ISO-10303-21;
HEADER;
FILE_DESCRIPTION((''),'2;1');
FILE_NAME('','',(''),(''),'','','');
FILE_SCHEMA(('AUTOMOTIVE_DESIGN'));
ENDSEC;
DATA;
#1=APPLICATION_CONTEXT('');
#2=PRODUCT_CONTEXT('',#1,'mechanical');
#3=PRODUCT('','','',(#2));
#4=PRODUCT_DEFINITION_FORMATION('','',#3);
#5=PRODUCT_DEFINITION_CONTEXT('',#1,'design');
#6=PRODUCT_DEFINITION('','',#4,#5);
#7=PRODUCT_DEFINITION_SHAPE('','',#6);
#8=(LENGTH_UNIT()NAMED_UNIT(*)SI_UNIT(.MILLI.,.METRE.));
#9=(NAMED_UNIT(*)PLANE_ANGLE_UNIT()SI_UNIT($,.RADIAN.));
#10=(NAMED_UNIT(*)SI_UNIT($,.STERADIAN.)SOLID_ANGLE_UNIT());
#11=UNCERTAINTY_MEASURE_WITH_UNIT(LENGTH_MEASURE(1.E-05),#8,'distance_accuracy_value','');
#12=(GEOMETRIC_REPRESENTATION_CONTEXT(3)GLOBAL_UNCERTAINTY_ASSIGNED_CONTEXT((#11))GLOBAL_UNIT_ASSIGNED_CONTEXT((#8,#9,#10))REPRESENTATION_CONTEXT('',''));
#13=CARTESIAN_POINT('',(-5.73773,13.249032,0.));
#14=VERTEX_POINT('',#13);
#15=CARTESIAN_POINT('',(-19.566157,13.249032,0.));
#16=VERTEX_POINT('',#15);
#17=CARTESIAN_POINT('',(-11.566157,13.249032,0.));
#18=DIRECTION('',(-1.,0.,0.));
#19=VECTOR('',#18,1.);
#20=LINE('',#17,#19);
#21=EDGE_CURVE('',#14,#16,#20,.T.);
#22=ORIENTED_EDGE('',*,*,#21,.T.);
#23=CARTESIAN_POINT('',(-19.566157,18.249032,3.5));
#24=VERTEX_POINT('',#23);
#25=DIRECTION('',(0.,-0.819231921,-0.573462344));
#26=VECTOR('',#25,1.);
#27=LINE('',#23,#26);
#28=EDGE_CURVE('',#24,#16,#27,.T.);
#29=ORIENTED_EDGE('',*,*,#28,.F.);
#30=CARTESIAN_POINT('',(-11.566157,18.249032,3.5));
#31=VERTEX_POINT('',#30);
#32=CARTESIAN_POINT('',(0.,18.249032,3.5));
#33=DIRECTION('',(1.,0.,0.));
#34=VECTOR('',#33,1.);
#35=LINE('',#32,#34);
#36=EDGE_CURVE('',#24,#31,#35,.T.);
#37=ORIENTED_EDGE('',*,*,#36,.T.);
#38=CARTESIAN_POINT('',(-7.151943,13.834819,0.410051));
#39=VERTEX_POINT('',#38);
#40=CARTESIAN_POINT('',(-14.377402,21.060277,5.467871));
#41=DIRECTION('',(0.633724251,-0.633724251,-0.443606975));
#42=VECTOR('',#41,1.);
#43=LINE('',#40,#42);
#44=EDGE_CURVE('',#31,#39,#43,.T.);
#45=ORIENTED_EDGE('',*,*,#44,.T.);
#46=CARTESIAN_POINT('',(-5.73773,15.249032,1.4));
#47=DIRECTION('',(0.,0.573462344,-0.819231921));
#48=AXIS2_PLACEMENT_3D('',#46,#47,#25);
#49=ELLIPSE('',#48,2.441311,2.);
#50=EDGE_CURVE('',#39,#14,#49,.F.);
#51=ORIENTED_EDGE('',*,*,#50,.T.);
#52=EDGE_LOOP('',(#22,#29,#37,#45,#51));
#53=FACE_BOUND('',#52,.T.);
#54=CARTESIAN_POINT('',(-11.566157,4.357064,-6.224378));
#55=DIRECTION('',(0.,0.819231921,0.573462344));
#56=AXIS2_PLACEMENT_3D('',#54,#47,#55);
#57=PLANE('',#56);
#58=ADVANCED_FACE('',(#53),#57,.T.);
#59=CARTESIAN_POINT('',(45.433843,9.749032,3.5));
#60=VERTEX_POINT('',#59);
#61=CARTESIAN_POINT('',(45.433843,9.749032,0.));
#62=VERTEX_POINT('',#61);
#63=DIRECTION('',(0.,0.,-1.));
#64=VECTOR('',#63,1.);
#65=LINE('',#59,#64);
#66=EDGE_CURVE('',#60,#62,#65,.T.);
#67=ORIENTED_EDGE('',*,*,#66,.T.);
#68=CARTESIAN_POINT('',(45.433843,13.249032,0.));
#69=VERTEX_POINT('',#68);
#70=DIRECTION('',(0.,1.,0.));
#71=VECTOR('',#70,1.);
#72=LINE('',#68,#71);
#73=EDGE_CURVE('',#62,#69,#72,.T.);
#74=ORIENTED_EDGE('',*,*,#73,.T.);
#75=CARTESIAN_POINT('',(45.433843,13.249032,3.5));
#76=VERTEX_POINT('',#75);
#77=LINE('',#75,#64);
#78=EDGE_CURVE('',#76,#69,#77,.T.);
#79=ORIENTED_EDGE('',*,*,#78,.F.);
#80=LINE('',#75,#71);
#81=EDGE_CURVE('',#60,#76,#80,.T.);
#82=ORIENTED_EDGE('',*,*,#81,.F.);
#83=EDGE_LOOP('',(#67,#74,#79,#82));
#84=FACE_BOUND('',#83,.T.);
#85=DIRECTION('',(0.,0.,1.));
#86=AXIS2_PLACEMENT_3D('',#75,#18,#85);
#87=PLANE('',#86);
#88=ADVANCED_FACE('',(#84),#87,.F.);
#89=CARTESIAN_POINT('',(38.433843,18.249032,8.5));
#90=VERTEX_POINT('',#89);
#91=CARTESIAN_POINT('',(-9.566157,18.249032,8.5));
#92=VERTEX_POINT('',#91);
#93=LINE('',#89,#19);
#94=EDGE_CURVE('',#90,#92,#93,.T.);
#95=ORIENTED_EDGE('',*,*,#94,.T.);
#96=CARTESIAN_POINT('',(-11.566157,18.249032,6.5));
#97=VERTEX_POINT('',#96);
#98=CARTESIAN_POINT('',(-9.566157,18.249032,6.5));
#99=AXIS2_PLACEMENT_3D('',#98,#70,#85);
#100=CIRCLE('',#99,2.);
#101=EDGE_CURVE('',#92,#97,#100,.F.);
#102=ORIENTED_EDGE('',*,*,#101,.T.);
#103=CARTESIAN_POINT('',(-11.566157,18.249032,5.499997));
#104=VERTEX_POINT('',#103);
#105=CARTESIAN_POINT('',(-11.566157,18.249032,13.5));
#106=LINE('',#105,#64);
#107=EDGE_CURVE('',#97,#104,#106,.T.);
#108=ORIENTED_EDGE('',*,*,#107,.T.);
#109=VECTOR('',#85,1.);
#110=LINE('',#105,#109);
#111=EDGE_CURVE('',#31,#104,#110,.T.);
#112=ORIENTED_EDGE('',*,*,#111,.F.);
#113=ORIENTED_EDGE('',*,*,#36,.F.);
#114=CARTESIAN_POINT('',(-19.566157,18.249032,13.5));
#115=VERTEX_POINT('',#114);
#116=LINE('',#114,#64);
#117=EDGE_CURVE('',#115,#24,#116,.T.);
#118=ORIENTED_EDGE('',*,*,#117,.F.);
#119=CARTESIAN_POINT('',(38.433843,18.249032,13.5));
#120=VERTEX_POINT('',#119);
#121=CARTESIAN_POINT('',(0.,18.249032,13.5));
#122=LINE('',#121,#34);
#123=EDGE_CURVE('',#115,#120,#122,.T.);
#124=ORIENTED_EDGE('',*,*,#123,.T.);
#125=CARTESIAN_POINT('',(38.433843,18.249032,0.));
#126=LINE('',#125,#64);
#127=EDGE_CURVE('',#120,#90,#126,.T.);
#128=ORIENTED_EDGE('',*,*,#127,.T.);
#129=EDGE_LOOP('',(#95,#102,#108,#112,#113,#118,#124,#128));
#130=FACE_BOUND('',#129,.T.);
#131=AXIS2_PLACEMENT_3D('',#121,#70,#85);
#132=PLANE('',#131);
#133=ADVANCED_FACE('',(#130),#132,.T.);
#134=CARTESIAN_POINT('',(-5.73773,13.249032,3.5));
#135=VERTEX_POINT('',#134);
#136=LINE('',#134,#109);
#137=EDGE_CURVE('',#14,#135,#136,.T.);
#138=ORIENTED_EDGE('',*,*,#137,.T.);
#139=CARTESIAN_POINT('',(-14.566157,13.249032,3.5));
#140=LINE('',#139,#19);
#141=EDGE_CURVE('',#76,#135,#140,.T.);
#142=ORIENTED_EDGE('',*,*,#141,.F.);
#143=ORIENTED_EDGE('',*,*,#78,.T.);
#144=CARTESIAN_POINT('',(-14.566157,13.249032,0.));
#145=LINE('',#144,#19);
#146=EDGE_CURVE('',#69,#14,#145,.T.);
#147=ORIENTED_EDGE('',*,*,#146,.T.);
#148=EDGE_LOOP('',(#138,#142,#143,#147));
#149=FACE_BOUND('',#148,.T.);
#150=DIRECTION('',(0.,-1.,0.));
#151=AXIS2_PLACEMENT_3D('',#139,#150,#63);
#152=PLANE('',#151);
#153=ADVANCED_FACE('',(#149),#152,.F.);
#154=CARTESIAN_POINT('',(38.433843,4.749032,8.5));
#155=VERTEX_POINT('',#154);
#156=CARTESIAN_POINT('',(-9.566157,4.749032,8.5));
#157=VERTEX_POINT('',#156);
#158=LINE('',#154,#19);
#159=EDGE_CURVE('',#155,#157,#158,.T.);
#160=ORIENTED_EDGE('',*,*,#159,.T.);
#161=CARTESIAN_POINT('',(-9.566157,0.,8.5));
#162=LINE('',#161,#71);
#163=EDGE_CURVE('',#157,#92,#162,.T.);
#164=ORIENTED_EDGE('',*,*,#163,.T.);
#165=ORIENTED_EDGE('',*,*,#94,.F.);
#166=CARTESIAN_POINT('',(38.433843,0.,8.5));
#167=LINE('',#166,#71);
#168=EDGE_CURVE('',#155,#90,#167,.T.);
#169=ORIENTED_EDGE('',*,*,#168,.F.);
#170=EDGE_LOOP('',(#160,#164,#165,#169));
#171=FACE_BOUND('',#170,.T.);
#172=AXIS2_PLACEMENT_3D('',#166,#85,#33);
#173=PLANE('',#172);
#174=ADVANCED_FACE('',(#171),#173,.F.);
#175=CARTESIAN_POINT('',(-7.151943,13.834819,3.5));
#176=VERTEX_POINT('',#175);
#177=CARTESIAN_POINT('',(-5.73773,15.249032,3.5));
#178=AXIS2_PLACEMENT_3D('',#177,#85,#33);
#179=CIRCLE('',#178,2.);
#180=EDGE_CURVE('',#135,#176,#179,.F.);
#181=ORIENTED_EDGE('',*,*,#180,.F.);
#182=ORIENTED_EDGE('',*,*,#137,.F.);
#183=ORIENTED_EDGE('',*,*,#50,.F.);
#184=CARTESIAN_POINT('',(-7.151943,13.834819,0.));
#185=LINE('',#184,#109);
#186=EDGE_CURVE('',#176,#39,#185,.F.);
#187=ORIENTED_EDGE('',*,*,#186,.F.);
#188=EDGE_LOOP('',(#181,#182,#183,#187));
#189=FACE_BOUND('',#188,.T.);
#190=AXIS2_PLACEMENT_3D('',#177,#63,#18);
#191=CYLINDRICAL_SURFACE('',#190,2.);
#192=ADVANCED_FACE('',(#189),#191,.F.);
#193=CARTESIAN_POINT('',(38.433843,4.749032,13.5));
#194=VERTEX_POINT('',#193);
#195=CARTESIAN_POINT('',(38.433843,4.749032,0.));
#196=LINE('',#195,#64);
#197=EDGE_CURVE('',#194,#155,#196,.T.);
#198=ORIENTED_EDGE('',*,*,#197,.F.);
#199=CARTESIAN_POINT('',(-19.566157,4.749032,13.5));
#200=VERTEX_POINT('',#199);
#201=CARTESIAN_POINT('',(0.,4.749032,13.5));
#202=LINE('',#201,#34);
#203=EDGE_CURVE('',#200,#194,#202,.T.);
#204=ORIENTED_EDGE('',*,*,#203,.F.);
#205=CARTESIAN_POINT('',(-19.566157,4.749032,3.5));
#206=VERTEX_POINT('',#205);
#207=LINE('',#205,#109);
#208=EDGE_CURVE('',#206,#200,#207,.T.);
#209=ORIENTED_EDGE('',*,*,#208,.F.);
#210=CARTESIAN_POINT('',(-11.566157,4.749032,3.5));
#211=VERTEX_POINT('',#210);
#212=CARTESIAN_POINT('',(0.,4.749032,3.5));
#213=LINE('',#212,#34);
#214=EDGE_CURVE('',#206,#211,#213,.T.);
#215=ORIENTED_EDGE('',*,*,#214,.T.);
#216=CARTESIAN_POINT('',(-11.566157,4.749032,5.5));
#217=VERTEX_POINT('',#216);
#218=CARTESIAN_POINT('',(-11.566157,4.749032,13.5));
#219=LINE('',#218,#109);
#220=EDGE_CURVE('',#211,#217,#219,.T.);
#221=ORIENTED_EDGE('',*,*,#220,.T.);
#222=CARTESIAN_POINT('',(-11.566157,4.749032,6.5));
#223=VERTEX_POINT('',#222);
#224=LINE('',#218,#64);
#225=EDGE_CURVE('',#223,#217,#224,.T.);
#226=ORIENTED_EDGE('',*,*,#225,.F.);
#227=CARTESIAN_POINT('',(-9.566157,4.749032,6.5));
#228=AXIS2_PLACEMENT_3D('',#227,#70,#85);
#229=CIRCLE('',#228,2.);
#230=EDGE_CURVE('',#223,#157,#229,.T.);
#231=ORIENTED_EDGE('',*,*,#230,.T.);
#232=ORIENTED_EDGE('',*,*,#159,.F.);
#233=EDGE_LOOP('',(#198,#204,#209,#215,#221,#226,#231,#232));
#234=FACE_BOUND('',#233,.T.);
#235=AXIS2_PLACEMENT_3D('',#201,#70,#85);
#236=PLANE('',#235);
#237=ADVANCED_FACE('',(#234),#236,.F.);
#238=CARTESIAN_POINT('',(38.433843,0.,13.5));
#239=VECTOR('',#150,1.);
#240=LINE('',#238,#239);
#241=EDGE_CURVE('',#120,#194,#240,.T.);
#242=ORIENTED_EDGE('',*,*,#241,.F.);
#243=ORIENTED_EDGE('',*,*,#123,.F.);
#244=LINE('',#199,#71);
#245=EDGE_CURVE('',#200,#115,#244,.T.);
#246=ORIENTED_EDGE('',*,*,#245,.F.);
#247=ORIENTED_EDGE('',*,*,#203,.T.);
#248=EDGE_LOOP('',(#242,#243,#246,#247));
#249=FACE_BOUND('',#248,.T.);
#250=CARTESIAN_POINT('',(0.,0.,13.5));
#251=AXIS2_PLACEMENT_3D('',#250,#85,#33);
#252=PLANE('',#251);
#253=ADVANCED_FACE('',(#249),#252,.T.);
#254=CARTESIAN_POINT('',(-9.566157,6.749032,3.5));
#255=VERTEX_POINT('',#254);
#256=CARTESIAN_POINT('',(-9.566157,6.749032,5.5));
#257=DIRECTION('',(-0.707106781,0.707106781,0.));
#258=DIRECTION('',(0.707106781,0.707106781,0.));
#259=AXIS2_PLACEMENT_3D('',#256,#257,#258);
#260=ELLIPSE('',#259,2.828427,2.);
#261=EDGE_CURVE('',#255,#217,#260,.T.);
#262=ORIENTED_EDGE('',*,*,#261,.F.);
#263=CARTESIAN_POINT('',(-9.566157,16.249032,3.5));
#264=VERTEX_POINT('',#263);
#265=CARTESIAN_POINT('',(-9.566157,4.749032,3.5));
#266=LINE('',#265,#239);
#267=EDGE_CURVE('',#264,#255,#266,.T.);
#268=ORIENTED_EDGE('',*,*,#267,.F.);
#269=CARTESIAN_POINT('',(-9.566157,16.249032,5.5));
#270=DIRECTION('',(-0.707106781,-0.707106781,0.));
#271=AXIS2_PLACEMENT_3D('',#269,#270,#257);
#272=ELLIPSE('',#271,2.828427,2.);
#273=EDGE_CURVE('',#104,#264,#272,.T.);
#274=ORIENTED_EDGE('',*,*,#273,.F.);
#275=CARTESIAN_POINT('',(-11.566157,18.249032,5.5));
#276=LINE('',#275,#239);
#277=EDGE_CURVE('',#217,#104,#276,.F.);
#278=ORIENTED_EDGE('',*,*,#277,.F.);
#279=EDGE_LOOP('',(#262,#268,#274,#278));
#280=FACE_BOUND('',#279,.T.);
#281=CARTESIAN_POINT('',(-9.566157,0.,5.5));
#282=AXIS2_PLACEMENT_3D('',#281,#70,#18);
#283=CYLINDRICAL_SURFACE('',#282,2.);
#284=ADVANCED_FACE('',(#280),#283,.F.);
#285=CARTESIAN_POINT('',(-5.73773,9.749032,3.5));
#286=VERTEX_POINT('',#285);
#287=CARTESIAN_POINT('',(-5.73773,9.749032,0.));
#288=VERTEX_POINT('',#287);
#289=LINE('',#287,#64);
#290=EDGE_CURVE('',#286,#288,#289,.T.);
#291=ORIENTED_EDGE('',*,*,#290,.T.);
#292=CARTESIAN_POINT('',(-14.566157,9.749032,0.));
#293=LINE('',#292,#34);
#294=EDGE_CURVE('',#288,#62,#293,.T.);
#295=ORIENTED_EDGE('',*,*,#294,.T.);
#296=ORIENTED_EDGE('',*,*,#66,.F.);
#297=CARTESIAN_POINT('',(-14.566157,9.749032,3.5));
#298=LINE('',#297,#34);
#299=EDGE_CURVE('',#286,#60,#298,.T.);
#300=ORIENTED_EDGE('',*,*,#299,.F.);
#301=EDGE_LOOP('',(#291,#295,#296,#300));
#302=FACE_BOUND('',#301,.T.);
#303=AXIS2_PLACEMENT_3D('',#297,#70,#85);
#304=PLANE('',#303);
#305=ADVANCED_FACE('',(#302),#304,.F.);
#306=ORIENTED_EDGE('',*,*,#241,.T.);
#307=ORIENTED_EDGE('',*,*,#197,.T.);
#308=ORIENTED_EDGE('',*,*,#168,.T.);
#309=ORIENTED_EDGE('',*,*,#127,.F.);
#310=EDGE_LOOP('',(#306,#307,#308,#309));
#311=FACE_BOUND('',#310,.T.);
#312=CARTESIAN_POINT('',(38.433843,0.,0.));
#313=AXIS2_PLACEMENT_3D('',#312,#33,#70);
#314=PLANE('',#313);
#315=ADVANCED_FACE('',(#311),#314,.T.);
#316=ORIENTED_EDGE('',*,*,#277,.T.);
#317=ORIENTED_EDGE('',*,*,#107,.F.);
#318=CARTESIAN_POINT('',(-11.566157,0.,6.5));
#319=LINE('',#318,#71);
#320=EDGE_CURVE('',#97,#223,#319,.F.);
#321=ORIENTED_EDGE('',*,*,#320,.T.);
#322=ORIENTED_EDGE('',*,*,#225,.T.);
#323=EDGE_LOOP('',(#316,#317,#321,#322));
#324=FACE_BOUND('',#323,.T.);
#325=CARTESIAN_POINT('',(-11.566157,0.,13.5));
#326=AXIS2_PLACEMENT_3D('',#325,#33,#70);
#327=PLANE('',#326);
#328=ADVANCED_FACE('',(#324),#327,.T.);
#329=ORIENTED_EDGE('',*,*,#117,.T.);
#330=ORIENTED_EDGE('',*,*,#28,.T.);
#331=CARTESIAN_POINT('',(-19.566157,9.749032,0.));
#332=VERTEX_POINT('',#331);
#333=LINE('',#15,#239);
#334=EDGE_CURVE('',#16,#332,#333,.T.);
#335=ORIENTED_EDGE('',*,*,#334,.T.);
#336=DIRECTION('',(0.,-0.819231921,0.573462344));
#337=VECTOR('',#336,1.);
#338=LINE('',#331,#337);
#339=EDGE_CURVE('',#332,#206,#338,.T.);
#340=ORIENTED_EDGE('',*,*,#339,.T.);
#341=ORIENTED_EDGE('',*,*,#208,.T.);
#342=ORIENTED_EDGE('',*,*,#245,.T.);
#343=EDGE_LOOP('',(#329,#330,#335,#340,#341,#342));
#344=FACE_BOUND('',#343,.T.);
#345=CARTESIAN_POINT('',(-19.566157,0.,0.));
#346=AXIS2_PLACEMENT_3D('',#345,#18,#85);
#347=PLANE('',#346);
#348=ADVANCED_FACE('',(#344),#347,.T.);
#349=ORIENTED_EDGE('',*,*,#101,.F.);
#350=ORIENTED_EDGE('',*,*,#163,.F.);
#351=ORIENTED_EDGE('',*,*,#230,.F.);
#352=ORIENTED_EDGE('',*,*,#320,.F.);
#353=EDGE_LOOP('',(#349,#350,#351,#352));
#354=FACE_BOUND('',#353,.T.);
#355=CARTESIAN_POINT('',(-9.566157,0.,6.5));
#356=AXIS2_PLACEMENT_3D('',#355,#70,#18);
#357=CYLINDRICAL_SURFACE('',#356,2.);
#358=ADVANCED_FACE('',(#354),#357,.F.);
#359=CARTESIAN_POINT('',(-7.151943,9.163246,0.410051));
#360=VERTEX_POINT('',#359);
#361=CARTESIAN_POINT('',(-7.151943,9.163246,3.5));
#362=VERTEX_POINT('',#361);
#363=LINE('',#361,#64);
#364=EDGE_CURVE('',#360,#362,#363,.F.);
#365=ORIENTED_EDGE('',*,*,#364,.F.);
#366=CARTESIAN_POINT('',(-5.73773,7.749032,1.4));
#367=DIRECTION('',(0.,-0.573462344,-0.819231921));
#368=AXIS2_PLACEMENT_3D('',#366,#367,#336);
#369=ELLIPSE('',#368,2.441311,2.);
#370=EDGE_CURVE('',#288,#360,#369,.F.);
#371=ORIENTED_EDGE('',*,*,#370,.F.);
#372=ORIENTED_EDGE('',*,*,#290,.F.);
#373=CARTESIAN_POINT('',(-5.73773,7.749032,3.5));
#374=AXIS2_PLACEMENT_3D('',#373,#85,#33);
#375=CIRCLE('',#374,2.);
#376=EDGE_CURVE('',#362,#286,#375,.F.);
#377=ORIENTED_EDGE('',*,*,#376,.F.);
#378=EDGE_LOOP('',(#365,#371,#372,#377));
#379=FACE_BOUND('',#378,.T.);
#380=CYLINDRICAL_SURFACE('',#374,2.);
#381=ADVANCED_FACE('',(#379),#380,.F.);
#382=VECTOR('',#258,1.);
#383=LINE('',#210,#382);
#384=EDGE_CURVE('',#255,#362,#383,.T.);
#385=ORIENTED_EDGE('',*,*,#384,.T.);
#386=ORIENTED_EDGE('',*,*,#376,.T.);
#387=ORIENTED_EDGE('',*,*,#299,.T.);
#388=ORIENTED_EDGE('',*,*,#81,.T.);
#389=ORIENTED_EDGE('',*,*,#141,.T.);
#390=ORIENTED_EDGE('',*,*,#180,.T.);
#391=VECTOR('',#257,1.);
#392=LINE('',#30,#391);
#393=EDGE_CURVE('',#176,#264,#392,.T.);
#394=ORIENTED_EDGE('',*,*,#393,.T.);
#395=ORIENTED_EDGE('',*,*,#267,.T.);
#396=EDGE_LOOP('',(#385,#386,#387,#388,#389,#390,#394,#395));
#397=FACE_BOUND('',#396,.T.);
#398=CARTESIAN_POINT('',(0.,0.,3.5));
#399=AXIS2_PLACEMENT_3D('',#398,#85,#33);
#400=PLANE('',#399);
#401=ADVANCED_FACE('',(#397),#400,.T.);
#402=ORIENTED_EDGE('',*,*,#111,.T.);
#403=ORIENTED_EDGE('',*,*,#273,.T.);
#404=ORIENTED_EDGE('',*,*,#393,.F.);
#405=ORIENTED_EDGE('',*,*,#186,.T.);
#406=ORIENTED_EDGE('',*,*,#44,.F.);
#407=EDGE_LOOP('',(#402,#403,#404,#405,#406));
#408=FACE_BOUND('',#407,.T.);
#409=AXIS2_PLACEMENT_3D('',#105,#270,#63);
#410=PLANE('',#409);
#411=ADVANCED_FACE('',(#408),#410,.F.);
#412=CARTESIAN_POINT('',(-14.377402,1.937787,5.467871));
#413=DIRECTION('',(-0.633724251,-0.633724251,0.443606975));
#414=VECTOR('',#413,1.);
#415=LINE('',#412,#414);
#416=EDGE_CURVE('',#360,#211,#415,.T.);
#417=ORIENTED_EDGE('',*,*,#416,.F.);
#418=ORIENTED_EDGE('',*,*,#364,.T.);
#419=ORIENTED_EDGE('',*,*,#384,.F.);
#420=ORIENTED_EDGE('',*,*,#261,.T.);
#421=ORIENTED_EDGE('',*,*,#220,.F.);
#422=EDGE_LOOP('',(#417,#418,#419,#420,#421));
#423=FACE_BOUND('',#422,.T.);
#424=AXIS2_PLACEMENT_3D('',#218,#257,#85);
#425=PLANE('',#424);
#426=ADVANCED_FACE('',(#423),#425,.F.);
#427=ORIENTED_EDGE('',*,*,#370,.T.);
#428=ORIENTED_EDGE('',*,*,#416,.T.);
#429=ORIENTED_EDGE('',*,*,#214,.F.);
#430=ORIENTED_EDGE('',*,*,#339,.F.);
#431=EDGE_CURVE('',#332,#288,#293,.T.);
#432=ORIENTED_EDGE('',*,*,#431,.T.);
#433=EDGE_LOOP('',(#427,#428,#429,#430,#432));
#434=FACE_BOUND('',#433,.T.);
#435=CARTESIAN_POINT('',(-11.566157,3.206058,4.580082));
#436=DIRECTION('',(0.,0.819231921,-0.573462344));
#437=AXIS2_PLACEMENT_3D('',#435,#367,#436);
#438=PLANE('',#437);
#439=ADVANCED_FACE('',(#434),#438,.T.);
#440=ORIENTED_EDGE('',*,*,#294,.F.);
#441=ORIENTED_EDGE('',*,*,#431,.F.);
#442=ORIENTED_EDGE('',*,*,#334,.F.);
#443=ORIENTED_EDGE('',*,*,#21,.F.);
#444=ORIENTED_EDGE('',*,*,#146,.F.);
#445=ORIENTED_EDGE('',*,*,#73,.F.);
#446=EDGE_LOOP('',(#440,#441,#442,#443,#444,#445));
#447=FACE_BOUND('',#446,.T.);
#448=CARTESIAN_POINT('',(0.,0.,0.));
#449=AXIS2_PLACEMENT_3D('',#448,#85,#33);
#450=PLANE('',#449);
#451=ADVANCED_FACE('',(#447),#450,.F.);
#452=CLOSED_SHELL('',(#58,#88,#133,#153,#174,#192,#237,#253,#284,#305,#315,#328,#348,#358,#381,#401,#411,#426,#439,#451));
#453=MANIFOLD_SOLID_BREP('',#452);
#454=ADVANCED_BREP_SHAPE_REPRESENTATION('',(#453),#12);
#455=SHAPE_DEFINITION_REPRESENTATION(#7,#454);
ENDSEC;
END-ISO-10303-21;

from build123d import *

# Parameters (mm, degrees)
SKETCH_1_W      = 60
SKETCH_1_H      = 3.5
EXTRUDE_1_DEPTH = 3.5
SKETCH_2_W      = 3
SKETCH_2_H      = 5
SKETCH_2_H_2    = 3.5
EXTRUDE_2_DEPTH = 10
EXTRUDE_3_DEPTH = 3
SKETCH_4_W      = 5
SKETCH_4_H      = 5.5
SKETCH_4_H_2    = 4
EXTRUDE_4_DEPTH = 50
CHAMFER_1_SIZE  = 5
FILLET_1_R      = 2
EXTRUDE_5_DEPTH = 5


# Some blends are built 0.0001 mm under size
with BuildPart() as part:
    # 草图1 → 凸台-拉伸1 (new body)
    with BuildSketch(Plane.XY):
        with Locations((15.433843148, 11.499032355)):
            Rectangle(SKETCH_1_W, SKETCH_1_H)
    extrude(amount=EXTRUDE_1_DEPTH)

    # 草图2 → 凸台-拉伸2 (add)
    with BuildSketch(Plane.XY.offset(3.5)):
        with Locations((-13.066156852, 15.749032355)):
            Rectangle(SKETCH_2_W, SKETCH_2_H)
        with Locations((-13.066156852, 11.499032355)):
            Rectangle(SKETCH_2_W, SKETCH_2_H_2)
        with Locations((-13.066156852, 7.249032355)):
            Rectangle(SKETCH_2_W, SKETCH_2_H)
    extrude(amount=EXTRUDE_2_DEPTH)

    # 草图3 → 凸台-拉伸3 (add)
    with BuildSketch(Plane.ZY.offset(14.566156852)):
        Polygon((0, 9.749032355), (3.5, 4.749032355), (3.5, 9.749032355), align=None)
        Polygon((3.5, 18.249032355), (0, 13.249032355), (3.5, 13.249032355), align=None)
    extrude(amount=-EXTRUDE_3_DEPTH)

    # 草图4 → 凸台-拉伸4 (add)
    with BuildSketch(Plane(origin=(-11.566156852, 0, 0), x_dir=(0, 0, -1), z_dir=(1, 0, 0))):
        with Locations((-11, 11.499032355)):
            Rectangle(SKETCH_4_W, SKETCH_4_H)
        with Locations((-11, 6.749032355)):
            Rectangle(SKETCH_4_W, SKETCH_4_H_2)
        with Locations((-11, 16.249032355)):
            Rectangle(SKETCH_4_W, SKETCH_4_H_2)
    extrude(amount=EXTRUDE_4_DEPTH)

    # 倒角1
    chamfer_1_edges = [part.edges().sort_by_distance(p)[0] for p in [
        (-11.566156852, 9.749032355, 1.75),
        (-11.566156852, 13.249032355, 1.75),
    ]]
    chamfer(chamfer_1_edges, length=CHAMFER_1_SIZE - 0.0001)  # a hair under: the kernel refuses the full size

    # 圆角1
    # the kernel refuses this fillet: 2 mm, written as the material it adds along each edge
    with BuildSketch(Plane(origin=(-11.566156852, 23.248932355, 3.5), x_dir=(1, 0, 0), z_dir=(0, -1, 0))) as fillet_1_piece_1_section:
        with BuildLine():
            CenterArc((FILLET_1_R, FILLET_1_R), FILLET_1_R, 180, 90)
            Line((0, FILLET_1_R), (0, 0))
            Line((0, 0), (FILLET_1_R, 0))
        make_face()
    fillet_1_piece_1 = extrude(amount=23.4998, mode=Mode.PRIVATE)
    fillet_1_piece_1 = split(fillet_1_piece_1, bisect_by=Plane(origin=(-7.979513836, 8.335775371, 3.970107375), z_dir=(-0.7071067811865476, 0.7071067811865476, 0)), keep=Keep.TOP, mode=Mode.PRIVATE)
    fillet_1_piece_1 = split(fillet_1_piece_1, bisect_by=Plane(origin=(-7.979513836, 14.662289339, 3.970107375), z_dir=(-0.7071067811865475, -0.7071067811865477, 0)), keep=Keep.TOP, mode=Mode.PRIVATE)
    fillet_1_piece_1 = split(fillet_1_piece_1, bisect_by=Plane(origin=(-11.14277082, 4.749032355, 3.970107375), z_dir=(0, 1, 0)), keep=Keep.TOP, mode=Mode.PRIVATE)
    fillet_1_piece_1 = split(fillet_1_piece_1, bisect_by=Plane(origin=(-11.14277082, 18.249032355, 3.970107375), z_dir=(0, -1, 0)), keep=Keep.TOP, mode=Mode.PRIVATE)
    fillet_1_piece_1 = split(fillet_1_piece_1, bisect_by=Plane(origin=(-11.14277082, 13.939686827, 0.48345813), z_dir=(0, -0.5734623443633282, 0.8192319205190406)), keep=Keep.TOP, mode=Mode.PRIVATE)
    add(fillet_1_piece_1)
    with BuildSketch(Plane(origin=(-11.566156852, 18.249032355, 8.5), x_dir=(0, 0, -1), z_dir=(0, -1, 0))) as fillet_1_piece_2:
        with BuildLine():
            CenterArc((FILLET_1_R, FILLET_1_R), FILLET_1_R, 180, 90)
            Line((0, FILLET_1_R), (0, 0))
            Line((0, 0), (FILLET_1_R, 0))
        make_face()
    extrude(amount=13.5)
    with BuildSketch(Plane(origin=(-6.566256852, 9.749032355, 3.5), x_dir=(-0.7071067811865475, -0.7071067811865475, 0), z_dir=(0, 0, -1))) as fillet_1_piece_3_section:
        with BuildLine():
            CenterArc((FILLET_1_R * 0.414213562373, -FILLET_1_R), FILLET_1_R, 90, 45)
            Line((-FILLET_1_R * 0.292893218813, -FILLET_1_R * 0.292893218813), (0, 0))
            Line((0, 0), (FILLET_1_R * 0.414213562373, 0))
        make_face()
    fillet_1_piece_3 = extrude(amount=3.5, mode=Mode.PRIVATE)
    fillet_1_piece_3 = split(fillet_1_piece_3, bisect_by=Plane(origin=(-6.5069765, 8.826534018, 0.645748836), z_dir=(0, 0.5734623443633283, 0.8192319205190405)), keep=Keep.TOP, mode=Mode.PRIVATE)
    add(fillet_1_piece_3)
    with BuildSketch(Plane(origin=(-6.566256852, 13.249032355, 0), x_dir=(1, 0, 0), z_dir=(0, 0, 1))) as fillet_1_piece_4_section:
        with BuildLine():
            CenterArc((FILLET_1_R * 0.414213562373, FILLET_1_R), FILLET_1_R, 225, 45)
            Line((-FILLET_1_R * 0.292893218813, FILLET_1_R * 0.292893218813), (0, 0))
            Line((0, 0), (FILLET_1_R * 0.414213562373, 0))
        make_face()
    fillet_1_piece_4 = extrude(amount=3.5, mode=Mode.PRIVATE)
    fillet_1_piece_4 = split(fillet_1_piece_4, bisect_by=Plane(origin=(-6.5069765, 14.171530692, 0.645748836), z_dir=(0, -0.5734623443633282, 0.8192319205190406)), keep=Keep.TOP, mode=Mode.PRIVATE)
    add(fillet_1_piece_4)

    # 草图5 → 凸台-拉伸5 (add)
    with BuildSketch(Plane.ZY.offset(14.566156852)):
        Polygon((3.5, 18.249032355), (0, 13.249032355), (0, 9.749032355), (3.5, 4.749032355), (13.5, 4.749032355), (13.5, 18.249032355), align=None)
    extrude(amount=EXTRUDE_5_DEPTH)


solid = part.part
